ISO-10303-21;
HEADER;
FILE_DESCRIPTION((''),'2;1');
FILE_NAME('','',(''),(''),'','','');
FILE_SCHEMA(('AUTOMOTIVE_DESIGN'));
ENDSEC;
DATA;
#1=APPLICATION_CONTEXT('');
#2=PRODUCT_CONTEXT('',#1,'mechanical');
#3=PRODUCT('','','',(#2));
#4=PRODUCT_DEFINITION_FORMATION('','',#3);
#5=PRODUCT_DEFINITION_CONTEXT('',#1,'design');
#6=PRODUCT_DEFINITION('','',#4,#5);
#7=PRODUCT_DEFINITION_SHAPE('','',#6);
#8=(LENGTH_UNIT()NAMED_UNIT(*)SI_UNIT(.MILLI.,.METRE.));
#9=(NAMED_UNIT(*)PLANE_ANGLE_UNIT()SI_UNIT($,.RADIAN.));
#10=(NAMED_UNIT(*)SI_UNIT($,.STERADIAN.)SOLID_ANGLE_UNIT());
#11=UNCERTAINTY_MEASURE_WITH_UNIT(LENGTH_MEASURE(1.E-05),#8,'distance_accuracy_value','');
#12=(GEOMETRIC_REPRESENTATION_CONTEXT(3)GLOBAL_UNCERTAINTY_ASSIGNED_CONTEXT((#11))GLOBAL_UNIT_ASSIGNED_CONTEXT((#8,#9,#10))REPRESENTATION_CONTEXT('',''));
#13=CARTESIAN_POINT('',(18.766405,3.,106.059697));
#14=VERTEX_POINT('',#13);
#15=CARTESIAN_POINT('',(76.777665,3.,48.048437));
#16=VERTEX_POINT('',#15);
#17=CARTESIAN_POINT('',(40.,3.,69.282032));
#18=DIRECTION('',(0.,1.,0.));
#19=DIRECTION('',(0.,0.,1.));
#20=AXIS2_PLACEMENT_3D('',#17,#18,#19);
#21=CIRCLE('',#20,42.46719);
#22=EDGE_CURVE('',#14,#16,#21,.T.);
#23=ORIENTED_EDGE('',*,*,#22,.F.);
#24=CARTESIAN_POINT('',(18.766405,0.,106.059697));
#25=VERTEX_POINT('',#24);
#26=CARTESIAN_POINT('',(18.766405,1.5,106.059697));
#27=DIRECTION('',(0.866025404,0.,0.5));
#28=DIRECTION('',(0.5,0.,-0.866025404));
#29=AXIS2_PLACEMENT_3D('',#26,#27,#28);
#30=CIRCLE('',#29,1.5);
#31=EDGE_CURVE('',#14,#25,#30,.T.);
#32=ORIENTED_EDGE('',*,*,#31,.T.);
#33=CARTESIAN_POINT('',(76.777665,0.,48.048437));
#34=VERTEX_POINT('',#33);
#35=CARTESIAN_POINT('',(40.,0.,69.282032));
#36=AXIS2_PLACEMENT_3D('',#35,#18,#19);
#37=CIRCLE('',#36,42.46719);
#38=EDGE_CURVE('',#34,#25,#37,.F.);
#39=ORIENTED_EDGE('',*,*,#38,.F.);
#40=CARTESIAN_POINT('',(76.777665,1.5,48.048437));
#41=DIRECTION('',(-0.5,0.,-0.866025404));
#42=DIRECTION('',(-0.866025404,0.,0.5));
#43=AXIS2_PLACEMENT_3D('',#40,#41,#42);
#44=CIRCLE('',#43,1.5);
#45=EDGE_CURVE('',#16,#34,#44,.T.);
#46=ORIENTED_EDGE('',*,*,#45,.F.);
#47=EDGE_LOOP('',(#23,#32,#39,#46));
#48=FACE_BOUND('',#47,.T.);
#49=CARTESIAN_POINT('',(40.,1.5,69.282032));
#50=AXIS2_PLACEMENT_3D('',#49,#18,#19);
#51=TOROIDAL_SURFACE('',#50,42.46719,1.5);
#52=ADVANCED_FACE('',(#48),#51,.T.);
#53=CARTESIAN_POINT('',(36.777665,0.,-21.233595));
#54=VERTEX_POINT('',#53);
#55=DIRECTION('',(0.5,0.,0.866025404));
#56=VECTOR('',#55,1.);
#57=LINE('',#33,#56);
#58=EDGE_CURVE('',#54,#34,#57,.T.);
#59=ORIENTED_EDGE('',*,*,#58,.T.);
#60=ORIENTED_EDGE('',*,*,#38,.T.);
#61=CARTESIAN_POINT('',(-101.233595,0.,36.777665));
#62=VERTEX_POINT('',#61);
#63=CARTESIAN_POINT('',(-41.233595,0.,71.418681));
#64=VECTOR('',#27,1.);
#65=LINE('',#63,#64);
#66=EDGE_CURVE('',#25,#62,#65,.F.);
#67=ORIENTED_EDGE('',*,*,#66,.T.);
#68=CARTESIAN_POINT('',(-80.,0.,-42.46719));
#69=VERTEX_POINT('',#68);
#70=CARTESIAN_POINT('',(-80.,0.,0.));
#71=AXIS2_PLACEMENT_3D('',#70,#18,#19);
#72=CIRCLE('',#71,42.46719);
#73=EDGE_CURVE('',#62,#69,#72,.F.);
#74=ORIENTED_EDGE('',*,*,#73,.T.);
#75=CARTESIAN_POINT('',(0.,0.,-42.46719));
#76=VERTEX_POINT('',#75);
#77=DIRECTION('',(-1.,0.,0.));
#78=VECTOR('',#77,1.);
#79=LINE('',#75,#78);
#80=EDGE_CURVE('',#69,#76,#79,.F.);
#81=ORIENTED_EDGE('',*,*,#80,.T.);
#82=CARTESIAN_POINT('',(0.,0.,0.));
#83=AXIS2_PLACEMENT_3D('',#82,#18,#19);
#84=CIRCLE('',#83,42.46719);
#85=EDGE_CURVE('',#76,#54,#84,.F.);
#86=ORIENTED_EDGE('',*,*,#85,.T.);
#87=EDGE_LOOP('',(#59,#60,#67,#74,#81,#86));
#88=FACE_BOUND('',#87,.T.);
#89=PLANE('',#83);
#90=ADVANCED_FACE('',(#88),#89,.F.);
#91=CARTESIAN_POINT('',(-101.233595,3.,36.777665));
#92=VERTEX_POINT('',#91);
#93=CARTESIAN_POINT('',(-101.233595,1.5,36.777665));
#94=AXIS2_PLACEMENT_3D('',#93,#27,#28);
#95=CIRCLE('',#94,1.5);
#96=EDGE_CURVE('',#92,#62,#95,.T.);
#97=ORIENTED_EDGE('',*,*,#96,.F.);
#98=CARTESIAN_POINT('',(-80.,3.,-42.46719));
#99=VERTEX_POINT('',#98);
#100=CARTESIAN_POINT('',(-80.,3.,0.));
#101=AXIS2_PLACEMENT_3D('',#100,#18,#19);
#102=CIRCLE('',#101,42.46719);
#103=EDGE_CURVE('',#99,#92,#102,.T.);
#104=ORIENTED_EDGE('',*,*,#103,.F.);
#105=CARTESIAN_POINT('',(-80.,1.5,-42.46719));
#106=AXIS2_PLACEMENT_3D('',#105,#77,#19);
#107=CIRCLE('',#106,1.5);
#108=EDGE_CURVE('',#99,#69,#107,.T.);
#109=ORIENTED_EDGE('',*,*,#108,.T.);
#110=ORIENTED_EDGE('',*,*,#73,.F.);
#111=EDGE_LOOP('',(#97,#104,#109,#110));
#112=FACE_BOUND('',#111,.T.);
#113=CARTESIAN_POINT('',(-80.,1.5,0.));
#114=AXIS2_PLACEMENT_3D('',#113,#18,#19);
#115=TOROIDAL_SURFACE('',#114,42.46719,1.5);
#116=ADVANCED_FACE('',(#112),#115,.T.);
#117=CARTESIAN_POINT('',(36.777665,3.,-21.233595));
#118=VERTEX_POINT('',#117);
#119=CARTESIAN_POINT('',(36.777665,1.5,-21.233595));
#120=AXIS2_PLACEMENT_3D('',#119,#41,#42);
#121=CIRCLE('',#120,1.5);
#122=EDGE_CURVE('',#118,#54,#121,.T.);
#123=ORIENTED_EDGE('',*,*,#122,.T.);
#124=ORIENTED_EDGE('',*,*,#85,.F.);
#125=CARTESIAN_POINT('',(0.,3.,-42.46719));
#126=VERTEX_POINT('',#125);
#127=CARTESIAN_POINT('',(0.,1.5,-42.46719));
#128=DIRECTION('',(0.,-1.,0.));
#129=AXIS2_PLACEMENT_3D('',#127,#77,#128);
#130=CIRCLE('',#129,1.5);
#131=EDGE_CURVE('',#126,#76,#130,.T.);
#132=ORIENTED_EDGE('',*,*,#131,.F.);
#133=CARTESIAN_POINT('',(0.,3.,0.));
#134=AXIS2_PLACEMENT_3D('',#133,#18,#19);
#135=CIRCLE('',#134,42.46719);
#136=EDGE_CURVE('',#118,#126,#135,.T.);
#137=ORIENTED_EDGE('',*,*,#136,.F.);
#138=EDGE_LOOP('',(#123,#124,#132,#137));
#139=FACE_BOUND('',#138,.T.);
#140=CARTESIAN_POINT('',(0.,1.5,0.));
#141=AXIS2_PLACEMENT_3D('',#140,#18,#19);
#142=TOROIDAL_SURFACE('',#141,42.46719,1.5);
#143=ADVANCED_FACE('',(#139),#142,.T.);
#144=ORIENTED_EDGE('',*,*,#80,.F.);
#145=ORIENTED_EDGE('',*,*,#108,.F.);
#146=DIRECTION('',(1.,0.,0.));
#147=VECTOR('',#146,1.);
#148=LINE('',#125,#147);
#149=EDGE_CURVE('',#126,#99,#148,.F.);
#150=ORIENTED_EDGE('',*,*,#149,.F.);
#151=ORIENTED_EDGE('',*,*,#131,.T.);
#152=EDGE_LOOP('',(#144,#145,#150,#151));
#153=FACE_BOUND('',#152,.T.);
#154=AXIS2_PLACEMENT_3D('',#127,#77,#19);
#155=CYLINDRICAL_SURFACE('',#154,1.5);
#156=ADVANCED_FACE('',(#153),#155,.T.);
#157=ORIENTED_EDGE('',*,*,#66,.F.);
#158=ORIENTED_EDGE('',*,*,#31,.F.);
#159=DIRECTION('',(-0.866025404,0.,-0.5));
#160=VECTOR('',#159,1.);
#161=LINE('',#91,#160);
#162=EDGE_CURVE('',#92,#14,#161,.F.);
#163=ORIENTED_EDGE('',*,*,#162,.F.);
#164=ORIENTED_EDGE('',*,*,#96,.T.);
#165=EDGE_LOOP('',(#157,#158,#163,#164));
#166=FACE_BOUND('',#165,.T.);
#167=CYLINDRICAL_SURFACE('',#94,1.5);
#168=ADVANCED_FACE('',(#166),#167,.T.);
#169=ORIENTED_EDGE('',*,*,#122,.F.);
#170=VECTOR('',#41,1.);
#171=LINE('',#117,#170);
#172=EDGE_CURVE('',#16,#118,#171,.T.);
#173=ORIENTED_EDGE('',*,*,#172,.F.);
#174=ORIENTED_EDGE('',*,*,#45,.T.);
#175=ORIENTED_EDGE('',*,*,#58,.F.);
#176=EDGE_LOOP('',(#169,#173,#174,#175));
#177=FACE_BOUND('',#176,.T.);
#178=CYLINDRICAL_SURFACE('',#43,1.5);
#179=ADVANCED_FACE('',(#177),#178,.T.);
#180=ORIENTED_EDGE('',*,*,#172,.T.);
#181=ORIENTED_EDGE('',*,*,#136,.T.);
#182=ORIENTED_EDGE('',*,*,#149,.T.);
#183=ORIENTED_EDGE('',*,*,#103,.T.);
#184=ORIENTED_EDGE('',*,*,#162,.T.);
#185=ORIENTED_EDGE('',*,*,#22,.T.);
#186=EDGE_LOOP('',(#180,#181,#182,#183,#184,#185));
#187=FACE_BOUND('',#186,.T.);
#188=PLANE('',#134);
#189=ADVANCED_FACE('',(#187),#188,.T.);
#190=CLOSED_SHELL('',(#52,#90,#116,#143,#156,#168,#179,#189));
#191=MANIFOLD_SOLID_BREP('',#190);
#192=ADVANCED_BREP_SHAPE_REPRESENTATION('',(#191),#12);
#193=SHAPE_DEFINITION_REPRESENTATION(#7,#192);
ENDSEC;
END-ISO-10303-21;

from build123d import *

# Parameters (mm, degrees)
DODANIE_WYCI_GNI_CIE1_DEPTH = 3
ZAOKR_GLENIE1_R             = 1.5


with BuildPart() as part:
    # Szkic1 → Dodanie-wyciągnięcie1 (new body)
    with BuildSketch(Plane(origin=(0, 0, 0), x_dir=(1, 0, 0), z_dir=(0, 1, 0))):
        with BuildLine():
            Line((0, 43.967189626), (-80, 43.967189626))
            ThreePointArc((-80, 43.967189626), (-122.469043969, 11.379546035), (-101.983594813, -38.076703149))
            Line((-101.983594813, -38.076703149), (18.016405187, -107.358735452))
            ThreePointArc((18.016405187, -107.358735452), (71.089497934, -100.371530237), (78.076703149, -47.29843749))
            Line((78.076703149, -47.29843749), (38.076703149, 21.983594813))
            ThreePointArc((38.076703149, 21.983594813), (21.983594813, 38.076703149), (0, 43.967189626))
        make_face()
    extrude(amount=DODANIE_WYCI_GNI_CIE1_DEPTH)

    # Zaokrąglenie1
    zaokr_glenie1_edges = [part.edges().sort_by_distance(p)[0] for p in [
        (-122.469043969, 3, -11.379546035),
        (-41.983594813, 3, 72.717719301),
        (71.089497934, 3, 100.371530237),
        (58.076703149, 3, 12.657421338),
        (21.983594813, 3, -38.076703149),
        (58.076703149, 0, 12.657421338),
        (-41.983594813, 0, 72.717719301),
        (-40, 0, -43.967189626),
        (-40, 3, -43.967189626),
    ]]
    fillet(zaokr_glenie1_edges, radius=ZAOKR_GLENIE1_R - 0.0001)  # a hair under: the kernel refuses the full size


solid = part.part
